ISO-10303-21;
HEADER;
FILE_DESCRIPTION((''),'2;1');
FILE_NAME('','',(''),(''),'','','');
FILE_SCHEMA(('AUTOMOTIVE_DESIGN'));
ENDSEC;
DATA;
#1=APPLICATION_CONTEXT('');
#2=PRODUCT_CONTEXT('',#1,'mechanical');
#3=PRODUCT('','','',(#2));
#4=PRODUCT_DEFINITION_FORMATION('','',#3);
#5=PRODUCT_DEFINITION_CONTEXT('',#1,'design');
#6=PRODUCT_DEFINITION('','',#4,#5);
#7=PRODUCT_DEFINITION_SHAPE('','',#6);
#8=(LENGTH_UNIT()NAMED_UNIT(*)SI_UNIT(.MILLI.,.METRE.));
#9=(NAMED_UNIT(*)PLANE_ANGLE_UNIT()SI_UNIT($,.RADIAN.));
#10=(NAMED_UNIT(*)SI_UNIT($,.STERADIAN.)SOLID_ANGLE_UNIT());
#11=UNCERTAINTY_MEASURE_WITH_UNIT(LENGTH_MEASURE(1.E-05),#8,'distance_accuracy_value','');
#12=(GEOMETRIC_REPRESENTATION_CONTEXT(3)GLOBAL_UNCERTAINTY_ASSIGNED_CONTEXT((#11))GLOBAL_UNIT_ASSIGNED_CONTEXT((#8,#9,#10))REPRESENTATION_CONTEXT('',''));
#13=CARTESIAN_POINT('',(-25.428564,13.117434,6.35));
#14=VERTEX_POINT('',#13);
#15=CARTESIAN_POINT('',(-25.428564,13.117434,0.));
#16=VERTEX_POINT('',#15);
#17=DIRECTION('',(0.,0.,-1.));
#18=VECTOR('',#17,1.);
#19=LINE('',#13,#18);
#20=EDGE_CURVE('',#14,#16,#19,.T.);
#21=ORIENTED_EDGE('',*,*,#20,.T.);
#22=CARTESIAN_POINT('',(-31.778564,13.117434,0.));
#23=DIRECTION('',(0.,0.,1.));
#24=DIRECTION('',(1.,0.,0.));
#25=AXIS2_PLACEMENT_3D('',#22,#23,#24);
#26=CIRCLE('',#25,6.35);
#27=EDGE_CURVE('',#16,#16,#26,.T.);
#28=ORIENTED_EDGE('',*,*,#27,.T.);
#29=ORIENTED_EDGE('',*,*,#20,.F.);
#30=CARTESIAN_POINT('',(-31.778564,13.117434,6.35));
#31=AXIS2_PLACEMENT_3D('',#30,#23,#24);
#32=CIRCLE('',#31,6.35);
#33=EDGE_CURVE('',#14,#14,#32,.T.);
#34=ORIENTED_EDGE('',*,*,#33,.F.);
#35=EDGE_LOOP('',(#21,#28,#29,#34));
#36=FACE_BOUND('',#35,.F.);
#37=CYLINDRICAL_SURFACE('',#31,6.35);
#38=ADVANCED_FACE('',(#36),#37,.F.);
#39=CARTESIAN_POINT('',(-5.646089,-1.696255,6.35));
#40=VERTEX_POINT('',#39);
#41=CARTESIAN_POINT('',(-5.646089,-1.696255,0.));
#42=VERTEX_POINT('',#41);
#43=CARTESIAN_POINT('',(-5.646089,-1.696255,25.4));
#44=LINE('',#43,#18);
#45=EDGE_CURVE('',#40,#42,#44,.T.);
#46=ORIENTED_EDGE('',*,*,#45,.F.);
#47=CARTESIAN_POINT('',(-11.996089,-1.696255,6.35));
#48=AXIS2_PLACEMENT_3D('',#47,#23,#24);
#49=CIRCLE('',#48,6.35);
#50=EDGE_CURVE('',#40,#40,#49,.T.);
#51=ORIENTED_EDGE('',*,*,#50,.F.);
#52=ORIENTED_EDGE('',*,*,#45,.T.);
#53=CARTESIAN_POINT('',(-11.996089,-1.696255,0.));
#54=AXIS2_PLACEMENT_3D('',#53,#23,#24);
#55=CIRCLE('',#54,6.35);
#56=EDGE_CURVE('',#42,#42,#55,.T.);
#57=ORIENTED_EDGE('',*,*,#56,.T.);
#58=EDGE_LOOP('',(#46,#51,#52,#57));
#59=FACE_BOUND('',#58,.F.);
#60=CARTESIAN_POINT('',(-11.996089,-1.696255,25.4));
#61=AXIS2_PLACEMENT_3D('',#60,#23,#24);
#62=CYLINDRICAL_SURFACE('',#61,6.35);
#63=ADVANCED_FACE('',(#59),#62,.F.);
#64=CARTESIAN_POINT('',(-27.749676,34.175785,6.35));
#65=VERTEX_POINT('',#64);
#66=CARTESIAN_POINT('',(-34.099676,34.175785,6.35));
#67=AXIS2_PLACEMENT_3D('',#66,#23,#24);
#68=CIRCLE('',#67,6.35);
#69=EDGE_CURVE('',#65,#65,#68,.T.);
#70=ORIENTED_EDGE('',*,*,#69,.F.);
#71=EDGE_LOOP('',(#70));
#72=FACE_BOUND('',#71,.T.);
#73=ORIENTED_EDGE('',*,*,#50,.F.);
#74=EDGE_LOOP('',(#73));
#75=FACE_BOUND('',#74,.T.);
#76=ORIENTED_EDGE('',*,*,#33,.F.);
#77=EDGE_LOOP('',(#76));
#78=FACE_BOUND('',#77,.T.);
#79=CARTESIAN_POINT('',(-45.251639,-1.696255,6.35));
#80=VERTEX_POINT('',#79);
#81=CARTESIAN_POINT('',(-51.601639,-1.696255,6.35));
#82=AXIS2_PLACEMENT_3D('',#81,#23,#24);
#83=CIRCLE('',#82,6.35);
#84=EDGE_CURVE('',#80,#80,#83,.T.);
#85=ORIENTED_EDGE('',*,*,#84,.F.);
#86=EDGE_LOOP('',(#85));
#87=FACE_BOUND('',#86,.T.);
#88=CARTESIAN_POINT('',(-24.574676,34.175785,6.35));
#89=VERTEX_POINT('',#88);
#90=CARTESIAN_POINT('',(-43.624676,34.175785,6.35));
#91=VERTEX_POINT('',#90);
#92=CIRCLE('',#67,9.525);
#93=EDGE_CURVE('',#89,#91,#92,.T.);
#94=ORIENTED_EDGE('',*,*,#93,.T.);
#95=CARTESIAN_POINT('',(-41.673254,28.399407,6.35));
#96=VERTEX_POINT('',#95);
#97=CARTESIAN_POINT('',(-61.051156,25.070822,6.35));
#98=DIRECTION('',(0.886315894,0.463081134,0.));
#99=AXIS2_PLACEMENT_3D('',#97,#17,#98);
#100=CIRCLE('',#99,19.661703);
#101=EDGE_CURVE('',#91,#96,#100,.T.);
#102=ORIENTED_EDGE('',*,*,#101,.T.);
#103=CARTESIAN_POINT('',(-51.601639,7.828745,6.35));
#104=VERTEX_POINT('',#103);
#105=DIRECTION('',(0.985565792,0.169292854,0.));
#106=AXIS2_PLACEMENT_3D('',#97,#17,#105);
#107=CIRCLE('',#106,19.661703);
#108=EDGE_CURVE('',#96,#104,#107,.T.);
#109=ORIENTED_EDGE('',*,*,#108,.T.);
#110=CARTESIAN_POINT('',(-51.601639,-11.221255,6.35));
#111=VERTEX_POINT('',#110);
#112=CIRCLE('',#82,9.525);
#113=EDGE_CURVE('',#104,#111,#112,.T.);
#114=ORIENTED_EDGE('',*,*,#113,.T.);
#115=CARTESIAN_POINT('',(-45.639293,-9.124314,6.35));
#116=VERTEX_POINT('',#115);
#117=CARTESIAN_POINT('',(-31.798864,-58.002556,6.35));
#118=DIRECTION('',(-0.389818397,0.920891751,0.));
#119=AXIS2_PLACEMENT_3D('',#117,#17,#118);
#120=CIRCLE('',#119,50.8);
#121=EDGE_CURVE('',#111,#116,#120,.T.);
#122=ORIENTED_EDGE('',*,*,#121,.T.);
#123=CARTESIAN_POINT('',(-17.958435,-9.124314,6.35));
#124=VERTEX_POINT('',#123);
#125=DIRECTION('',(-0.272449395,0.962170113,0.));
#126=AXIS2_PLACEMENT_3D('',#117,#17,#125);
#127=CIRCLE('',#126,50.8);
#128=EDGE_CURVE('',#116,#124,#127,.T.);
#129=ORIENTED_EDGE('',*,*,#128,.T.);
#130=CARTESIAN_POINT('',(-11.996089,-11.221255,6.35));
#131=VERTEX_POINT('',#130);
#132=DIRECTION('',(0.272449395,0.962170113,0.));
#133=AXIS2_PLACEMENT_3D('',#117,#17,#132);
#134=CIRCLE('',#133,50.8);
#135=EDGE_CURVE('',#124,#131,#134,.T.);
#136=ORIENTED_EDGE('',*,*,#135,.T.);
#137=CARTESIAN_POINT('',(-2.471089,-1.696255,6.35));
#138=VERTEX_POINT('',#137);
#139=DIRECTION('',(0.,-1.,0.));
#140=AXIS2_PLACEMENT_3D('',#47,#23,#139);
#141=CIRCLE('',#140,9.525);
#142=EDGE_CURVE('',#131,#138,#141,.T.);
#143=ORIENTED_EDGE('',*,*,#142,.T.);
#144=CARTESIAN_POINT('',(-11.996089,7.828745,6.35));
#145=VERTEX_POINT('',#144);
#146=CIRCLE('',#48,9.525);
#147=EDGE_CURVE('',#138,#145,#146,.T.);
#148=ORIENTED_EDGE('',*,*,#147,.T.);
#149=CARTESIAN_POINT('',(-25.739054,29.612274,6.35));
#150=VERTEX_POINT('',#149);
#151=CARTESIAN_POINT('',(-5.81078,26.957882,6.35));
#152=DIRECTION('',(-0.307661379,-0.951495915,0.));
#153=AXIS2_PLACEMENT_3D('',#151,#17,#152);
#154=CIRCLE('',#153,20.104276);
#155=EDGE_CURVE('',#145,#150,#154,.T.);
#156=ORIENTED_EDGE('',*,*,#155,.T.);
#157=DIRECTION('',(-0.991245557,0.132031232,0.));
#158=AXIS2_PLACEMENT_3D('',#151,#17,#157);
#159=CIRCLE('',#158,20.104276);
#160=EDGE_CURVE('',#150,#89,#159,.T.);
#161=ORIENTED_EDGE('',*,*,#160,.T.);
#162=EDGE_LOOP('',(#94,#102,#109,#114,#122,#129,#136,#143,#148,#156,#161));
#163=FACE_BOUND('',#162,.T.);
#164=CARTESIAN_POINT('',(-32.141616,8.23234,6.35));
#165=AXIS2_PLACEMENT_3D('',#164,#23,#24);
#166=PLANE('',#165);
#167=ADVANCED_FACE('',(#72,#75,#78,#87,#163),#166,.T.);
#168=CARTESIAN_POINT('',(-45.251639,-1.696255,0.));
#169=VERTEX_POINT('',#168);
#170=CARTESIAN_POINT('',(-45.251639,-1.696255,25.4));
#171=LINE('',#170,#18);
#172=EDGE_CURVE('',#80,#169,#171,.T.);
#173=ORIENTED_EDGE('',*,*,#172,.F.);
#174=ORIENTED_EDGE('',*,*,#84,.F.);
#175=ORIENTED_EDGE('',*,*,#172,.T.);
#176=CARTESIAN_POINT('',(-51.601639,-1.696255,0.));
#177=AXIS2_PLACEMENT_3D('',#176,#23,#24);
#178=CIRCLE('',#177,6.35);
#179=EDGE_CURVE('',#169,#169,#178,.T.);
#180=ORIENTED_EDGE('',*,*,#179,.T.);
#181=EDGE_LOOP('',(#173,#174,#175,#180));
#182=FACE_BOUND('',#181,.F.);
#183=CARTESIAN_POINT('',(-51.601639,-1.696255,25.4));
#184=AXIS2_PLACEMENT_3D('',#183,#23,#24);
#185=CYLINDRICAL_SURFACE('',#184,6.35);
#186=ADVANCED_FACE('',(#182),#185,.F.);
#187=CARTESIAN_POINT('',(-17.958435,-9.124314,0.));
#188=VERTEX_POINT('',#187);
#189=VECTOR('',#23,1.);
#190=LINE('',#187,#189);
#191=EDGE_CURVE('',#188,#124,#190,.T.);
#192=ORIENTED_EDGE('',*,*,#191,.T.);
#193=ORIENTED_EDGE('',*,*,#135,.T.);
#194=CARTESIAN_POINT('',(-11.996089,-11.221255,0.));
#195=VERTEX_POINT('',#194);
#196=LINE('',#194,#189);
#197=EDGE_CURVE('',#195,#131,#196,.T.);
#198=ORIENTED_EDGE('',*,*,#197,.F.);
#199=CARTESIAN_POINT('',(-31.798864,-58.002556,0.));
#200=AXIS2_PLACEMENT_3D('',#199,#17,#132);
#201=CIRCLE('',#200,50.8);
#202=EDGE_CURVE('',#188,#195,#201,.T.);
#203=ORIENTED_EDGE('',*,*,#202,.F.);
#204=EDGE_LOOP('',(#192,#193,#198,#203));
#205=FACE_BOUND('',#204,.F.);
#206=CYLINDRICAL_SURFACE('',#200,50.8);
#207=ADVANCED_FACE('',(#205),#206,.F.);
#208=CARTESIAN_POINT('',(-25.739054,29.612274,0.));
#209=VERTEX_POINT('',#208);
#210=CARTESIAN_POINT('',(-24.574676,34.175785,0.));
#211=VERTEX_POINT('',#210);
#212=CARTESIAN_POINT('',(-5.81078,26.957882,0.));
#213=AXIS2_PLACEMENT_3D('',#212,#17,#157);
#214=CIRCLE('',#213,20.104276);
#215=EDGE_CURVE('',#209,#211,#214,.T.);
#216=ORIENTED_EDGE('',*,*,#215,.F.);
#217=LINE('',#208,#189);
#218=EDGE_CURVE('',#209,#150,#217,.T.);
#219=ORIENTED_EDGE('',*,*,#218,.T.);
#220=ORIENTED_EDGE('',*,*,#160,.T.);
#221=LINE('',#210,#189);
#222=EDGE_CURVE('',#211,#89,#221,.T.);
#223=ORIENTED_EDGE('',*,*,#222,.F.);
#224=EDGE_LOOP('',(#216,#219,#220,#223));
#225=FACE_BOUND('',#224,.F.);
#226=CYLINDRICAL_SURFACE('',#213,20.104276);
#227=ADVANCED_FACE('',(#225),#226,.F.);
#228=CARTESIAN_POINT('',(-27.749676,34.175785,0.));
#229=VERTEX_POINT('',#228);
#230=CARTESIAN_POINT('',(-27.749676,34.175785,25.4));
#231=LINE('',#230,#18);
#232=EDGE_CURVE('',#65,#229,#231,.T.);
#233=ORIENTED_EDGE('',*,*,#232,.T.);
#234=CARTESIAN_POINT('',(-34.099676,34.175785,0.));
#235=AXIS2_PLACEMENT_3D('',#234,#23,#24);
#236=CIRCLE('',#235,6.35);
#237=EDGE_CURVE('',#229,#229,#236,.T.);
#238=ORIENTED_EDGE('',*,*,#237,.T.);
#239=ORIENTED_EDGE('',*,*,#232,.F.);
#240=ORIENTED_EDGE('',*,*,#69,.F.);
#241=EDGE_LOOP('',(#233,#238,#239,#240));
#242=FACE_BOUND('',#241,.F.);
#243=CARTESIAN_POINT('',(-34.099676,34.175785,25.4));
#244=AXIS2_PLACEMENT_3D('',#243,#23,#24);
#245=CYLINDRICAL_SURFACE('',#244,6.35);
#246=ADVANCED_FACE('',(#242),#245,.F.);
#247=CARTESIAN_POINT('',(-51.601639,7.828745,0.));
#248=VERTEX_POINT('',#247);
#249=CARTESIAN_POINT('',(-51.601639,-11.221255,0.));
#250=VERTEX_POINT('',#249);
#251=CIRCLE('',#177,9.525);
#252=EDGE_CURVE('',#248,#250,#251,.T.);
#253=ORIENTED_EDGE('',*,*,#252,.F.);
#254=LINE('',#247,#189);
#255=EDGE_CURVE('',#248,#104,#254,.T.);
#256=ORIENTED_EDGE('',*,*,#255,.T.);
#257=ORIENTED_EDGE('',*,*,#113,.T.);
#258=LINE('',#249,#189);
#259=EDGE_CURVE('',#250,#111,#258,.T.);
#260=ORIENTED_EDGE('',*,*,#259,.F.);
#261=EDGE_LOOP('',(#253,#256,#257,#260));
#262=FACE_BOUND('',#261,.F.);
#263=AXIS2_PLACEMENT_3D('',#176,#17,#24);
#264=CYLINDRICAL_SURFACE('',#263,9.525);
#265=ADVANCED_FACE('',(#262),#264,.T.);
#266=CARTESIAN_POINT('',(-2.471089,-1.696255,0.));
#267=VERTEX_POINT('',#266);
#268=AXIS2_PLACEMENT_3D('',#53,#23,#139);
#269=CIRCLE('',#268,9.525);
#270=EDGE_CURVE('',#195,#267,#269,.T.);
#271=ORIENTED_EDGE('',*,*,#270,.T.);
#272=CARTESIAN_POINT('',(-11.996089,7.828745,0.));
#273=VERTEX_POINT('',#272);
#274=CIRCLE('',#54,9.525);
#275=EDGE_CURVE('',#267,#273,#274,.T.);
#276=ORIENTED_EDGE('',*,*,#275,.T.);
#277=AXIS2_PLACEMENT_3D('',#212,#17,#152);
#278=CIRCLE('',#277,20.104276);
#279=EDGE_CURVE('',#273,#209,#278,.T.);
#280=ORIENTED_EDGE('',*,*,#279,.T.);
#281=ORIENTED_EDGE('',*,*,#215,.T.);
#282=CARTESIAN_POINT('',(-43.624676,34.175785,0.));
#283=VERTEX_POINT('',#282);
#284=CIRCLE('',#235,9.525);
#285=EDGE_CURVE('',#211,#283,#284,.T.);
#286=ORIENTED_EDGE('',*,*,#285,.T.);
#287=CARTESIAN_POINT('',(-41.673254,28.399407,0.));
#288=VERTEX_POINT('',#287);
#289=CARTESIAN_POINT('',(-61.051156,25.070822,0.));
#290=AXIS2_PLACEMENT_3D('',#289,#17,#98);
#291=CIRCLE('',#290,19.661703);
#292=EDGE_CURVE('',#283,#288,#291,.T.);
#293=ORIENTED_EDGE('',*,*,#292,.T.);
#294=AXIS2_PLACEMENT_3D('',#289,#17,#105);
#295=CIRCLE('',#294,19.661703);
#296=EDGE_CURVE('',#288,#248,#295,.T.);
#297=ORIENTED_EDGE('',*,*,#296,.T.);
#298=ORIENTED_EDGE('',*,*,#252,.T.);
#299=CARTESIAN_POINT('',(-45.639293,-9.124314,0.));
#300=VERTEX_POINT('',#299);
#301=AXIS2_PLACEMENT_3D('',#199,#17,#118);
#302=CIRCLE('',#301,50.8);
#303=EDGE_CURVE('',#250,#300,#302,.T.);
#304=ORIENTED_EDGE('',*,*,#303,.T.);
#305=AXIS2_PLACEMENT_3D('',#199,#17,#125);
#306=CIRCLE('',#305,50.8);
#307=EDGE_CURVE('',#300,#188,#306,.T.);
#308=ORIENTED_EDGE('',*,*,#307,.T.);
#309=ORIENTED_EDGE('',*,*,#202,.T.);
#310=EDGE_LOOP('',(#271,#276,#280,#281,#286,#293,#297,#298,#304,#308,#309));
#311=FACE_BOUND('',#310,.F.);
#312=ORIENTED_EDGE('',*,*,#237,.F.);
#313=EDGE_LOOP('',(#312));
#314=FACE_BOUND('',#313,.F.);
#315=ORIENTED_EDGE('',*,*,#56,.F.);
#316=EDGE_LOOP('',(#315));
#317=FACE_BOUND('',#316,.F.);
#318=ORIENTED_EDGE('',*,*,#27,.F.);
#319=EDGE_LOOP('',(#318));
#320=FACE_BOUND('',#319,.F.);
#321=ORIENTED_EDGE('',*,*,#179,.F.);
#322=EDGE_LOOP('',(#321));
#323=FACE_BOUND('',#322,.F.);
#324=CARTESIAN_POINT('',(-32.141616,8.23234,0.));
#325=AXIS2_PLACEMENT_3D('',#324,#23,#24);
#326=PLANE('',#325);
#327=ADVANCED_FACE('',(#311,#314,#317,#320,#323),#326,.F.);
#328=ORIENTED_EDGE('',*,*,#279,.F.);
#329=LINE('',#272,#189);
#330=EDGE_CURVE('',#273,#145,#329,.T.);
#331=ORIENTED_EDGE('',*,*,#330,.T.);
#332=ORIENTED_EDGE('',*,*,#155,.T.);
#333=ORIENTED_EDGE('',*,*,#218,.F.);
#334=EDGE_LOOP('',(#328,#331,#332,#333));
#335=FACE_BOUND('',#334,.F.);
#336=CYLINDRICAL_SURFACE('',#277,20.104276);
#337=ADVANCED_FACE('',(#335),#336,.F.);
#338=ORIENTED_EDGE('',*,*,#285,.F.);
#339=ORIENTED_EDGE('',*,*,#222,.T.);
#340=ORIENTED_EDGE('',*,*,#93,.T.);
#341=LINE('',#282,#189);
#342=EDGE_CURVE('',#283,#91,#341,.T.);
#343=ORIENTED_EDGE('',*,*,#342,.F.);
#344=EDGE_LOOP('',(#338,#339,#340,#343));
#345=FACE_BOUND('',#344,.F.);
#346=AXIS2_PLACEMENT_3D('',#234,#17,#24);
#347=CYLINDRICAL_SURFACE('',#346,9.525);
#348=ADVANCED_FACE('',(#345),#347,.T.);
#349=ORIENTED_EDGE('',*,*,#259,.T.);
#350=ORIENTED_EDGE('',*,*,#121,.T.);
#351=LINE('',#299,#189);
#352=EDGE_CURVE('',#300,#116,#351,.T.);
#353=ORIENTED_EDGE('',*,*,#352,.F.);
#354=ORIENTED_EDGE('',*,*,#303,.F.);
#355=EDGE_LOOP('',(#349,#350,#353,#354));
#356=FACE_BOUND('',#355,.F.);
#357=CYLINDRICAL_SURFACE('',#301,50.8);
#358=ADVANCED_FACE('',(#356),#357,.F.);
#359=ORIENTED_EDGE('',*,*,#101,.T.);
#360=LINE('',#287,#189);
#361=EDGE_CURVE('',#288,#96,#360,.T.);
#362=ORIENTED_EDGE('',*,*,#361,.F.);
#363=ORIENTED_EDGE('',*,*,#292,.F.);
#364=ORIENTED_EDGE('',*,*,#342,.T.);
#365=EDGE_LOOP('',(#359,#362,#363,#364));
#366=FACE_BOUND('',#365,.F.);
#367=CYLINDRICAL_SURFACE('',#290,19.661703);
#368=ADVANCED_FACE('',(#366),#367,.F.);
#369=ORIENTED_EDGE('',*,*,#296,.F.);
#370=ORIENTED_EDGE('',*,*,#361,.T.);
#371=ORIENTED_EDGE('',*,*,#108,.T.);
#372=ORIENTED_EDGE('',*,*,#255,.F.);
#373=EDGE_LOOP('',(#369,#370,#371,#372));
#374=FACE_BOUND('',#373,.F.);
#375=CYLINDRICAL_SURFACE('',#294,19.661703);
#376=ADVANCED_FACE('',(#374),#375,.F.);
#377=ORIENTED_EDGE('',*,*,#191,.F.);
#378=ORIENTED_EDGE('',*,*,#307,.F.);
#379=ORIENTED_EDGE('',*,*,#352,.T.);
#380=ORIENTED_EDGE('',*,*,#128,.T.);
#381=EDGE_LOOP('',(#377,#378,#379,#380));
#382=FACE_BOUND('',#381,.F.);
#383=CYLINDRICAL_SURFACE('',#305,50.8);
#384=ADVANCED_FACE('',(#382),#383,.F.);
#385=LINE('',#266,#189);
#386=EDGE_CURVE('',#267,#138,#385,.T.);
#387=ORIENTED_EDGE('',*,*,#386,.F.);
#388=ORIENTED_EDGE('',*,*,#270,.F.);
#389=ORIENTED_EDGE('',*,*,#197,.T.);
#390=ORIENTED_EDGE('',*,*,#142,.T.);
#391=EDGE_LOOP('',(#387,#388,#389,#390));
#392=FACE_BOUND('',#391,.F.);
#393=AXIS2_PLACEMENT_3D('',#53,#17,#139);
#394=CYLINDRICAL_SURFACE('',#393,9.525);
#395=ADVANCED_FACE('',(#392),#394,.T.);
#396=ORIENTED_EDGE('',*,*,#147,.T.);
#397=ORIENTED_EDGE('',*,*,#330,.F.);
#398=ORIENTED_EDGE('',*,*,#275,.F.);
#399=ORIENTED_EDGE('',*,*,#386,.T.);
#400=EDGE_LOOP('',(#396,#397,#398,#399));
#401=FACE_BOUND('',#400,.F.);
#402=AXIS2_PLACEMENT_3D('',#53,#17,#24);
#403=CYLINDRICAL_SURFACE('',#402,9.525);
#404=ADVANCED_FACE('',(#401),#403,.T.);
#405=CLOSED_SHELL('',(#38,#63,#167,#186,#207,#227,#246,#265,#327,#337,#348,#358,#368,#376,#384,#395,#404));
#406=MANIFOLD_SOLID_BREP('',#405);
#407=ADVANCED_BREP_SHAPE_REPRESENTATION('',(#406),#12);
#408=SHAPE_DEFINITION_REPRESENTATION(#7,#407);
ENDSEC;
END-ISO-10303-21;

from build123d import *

# Parameters (mm, degrees)
F1_DEPTH = 25.4
F2_R     = 6.35
F3_DEPTH = 25.401
F4_DEPTH = 19.05
F5_R     = 6.35
F6_DEPTH = 6.351


with BuildPart() as f1:
    # F0 (on Top) → F1 (new body)
    with BuildSketch(Plane.XY):
        with BuildLine():
            ThreePointArc((-11.9960894898, 7.8287454173), (-22.8140252531, 16.2307401146), (-25.7390544228, 29.6122741608))
            ThreePointArc((-25.7390544228, 29.6122741608), (-33.3767507176, 24.6782589704), (-41.673253936, 28.3994073062))
            ThreePointArc((-41.673253936, 28.3994073062), (-43.3440087931, 16.5245060033), (-51.6016386333, 7.8287454173))
            ThreePointArc((-51.6016386333, 7.8287454173), (-44.8664465425, 5.0389375081), (-42.0766386333, -1.6962545827))
            ThreePointArc((-42.0766386333, -1.6962545827), (-43.013362785, -5.8153737791), (-45.6392933218, -9.1243137765))
            ThreePointArc((-45.6392933218, -9.1243137765), (-31.7988640615, -7.20255554), (-17.9584348012, -9.1243137765))
            ThreePointArc((-17.9584348012, -9.1243137765), (-20.9815746971, 1.463916392), (-11.9960894898, 7.8287454173))
        make_face()
        with BuildLine():
            ThreePointArc((-42.0766386333, -1.6962545827), (-44.8664465425, 5.0389375081), (-51.6016386333, 7.8287454173))
            ThreePointArc((-51.6016386333, 7.8287454173), (-61.1266386333, -1.6962545827), (-51.6016386333, -11.2212545827))
            ThreePointArc((-51.6016386333, -11.2212545827), (-48.6531092599, -10.0799677677), (-45.6392933218, -9.1243137765))
            ThreePointArc((-45.6392933218, -9.1243137765), (-43.013362785, -5.8153737791), (-42.0766386333, -1.6962545827))
        make_face()
        with BuildLine():
            ThreePointArc((-2.4710894898, -1.6962545827), (-5.260897399, 5.0389375081), (-11.9960894898, 7.8287454173))
            ThreePointArc((-11.9960894898, 7.8287454173), (-20.9815746971, 1.463916392), (-17.9584348012, -9.1243137765))
            ThreePointArc((-17.9584348012, -9.1243137765), (-14.9446188632, -10.0799677677), (-11.9960894898, -11.2212545827))
            ThreePointArc((-11.9960894898, -11.2212545827), (-5.260897399, -8.4314466735), (-2.4710894898, -1.6962545827))
        make_face()
        with BuildLine():
            ThreePointArc((-25.7390544228, 29.6122741608), (-25.2909601874, 31.9282439717), (-24.5746759409, 34.175785181))
            ThreePointArc((-24.5746759409, 34.175785181), (-34.0996759409, 43.700785181), (-43.6246759409, 34.175785181))
            ThreePointArc((-43.6246759409, 34.175785181), (-42.4236958583, 31.3636984394), (-41.673253936, 28.3994073062))
            ThreePointArc((-41.673253936, 28.3994073062), (-33.3767507176, 24.6782589704), (-25.7390544228, 29.6122741608))
        make_face()
    extrude(amount=F1_DEPTH)

    # F2 (on face) → F3 (cut, through all)
    with BuildSketch(Plane.XY.offset(25.4)):
        with Locations((-51.6016386333, -1.6962545827)):
            Circle(F2_R)
        with Locations((-11.9960894898, -1.6962545827)):
            Circle(F2_R)
        with Locations((-34.0996759409, 34.175785181)):
            Circle(F2_R)
    extrude(amount=-F3_DEPTH, mode=Mode.SUBTRACT)

    # F4 (cut): a face of the model
    f4_faces = [f1.faces().sort_by_distance(p)[0] for p in [
        (-32.4383450301, 9.0422986836, 25.4),
    ]]
    extrude(f4_faces, amount=-F4_DEPTH, mode=Mode.SUBTRACT)

    # F5 (on face) → F6 (cut, through all)
    with BuildSketch(Plane.XY.offset(6.35)):
        with Locations((-31.778564126, 13.1174343201)):
            Circle(F5_R)
    extrude(amount=-F6_DEPTH, mode=Mode.SUBTRACT)


solid = f1.part
